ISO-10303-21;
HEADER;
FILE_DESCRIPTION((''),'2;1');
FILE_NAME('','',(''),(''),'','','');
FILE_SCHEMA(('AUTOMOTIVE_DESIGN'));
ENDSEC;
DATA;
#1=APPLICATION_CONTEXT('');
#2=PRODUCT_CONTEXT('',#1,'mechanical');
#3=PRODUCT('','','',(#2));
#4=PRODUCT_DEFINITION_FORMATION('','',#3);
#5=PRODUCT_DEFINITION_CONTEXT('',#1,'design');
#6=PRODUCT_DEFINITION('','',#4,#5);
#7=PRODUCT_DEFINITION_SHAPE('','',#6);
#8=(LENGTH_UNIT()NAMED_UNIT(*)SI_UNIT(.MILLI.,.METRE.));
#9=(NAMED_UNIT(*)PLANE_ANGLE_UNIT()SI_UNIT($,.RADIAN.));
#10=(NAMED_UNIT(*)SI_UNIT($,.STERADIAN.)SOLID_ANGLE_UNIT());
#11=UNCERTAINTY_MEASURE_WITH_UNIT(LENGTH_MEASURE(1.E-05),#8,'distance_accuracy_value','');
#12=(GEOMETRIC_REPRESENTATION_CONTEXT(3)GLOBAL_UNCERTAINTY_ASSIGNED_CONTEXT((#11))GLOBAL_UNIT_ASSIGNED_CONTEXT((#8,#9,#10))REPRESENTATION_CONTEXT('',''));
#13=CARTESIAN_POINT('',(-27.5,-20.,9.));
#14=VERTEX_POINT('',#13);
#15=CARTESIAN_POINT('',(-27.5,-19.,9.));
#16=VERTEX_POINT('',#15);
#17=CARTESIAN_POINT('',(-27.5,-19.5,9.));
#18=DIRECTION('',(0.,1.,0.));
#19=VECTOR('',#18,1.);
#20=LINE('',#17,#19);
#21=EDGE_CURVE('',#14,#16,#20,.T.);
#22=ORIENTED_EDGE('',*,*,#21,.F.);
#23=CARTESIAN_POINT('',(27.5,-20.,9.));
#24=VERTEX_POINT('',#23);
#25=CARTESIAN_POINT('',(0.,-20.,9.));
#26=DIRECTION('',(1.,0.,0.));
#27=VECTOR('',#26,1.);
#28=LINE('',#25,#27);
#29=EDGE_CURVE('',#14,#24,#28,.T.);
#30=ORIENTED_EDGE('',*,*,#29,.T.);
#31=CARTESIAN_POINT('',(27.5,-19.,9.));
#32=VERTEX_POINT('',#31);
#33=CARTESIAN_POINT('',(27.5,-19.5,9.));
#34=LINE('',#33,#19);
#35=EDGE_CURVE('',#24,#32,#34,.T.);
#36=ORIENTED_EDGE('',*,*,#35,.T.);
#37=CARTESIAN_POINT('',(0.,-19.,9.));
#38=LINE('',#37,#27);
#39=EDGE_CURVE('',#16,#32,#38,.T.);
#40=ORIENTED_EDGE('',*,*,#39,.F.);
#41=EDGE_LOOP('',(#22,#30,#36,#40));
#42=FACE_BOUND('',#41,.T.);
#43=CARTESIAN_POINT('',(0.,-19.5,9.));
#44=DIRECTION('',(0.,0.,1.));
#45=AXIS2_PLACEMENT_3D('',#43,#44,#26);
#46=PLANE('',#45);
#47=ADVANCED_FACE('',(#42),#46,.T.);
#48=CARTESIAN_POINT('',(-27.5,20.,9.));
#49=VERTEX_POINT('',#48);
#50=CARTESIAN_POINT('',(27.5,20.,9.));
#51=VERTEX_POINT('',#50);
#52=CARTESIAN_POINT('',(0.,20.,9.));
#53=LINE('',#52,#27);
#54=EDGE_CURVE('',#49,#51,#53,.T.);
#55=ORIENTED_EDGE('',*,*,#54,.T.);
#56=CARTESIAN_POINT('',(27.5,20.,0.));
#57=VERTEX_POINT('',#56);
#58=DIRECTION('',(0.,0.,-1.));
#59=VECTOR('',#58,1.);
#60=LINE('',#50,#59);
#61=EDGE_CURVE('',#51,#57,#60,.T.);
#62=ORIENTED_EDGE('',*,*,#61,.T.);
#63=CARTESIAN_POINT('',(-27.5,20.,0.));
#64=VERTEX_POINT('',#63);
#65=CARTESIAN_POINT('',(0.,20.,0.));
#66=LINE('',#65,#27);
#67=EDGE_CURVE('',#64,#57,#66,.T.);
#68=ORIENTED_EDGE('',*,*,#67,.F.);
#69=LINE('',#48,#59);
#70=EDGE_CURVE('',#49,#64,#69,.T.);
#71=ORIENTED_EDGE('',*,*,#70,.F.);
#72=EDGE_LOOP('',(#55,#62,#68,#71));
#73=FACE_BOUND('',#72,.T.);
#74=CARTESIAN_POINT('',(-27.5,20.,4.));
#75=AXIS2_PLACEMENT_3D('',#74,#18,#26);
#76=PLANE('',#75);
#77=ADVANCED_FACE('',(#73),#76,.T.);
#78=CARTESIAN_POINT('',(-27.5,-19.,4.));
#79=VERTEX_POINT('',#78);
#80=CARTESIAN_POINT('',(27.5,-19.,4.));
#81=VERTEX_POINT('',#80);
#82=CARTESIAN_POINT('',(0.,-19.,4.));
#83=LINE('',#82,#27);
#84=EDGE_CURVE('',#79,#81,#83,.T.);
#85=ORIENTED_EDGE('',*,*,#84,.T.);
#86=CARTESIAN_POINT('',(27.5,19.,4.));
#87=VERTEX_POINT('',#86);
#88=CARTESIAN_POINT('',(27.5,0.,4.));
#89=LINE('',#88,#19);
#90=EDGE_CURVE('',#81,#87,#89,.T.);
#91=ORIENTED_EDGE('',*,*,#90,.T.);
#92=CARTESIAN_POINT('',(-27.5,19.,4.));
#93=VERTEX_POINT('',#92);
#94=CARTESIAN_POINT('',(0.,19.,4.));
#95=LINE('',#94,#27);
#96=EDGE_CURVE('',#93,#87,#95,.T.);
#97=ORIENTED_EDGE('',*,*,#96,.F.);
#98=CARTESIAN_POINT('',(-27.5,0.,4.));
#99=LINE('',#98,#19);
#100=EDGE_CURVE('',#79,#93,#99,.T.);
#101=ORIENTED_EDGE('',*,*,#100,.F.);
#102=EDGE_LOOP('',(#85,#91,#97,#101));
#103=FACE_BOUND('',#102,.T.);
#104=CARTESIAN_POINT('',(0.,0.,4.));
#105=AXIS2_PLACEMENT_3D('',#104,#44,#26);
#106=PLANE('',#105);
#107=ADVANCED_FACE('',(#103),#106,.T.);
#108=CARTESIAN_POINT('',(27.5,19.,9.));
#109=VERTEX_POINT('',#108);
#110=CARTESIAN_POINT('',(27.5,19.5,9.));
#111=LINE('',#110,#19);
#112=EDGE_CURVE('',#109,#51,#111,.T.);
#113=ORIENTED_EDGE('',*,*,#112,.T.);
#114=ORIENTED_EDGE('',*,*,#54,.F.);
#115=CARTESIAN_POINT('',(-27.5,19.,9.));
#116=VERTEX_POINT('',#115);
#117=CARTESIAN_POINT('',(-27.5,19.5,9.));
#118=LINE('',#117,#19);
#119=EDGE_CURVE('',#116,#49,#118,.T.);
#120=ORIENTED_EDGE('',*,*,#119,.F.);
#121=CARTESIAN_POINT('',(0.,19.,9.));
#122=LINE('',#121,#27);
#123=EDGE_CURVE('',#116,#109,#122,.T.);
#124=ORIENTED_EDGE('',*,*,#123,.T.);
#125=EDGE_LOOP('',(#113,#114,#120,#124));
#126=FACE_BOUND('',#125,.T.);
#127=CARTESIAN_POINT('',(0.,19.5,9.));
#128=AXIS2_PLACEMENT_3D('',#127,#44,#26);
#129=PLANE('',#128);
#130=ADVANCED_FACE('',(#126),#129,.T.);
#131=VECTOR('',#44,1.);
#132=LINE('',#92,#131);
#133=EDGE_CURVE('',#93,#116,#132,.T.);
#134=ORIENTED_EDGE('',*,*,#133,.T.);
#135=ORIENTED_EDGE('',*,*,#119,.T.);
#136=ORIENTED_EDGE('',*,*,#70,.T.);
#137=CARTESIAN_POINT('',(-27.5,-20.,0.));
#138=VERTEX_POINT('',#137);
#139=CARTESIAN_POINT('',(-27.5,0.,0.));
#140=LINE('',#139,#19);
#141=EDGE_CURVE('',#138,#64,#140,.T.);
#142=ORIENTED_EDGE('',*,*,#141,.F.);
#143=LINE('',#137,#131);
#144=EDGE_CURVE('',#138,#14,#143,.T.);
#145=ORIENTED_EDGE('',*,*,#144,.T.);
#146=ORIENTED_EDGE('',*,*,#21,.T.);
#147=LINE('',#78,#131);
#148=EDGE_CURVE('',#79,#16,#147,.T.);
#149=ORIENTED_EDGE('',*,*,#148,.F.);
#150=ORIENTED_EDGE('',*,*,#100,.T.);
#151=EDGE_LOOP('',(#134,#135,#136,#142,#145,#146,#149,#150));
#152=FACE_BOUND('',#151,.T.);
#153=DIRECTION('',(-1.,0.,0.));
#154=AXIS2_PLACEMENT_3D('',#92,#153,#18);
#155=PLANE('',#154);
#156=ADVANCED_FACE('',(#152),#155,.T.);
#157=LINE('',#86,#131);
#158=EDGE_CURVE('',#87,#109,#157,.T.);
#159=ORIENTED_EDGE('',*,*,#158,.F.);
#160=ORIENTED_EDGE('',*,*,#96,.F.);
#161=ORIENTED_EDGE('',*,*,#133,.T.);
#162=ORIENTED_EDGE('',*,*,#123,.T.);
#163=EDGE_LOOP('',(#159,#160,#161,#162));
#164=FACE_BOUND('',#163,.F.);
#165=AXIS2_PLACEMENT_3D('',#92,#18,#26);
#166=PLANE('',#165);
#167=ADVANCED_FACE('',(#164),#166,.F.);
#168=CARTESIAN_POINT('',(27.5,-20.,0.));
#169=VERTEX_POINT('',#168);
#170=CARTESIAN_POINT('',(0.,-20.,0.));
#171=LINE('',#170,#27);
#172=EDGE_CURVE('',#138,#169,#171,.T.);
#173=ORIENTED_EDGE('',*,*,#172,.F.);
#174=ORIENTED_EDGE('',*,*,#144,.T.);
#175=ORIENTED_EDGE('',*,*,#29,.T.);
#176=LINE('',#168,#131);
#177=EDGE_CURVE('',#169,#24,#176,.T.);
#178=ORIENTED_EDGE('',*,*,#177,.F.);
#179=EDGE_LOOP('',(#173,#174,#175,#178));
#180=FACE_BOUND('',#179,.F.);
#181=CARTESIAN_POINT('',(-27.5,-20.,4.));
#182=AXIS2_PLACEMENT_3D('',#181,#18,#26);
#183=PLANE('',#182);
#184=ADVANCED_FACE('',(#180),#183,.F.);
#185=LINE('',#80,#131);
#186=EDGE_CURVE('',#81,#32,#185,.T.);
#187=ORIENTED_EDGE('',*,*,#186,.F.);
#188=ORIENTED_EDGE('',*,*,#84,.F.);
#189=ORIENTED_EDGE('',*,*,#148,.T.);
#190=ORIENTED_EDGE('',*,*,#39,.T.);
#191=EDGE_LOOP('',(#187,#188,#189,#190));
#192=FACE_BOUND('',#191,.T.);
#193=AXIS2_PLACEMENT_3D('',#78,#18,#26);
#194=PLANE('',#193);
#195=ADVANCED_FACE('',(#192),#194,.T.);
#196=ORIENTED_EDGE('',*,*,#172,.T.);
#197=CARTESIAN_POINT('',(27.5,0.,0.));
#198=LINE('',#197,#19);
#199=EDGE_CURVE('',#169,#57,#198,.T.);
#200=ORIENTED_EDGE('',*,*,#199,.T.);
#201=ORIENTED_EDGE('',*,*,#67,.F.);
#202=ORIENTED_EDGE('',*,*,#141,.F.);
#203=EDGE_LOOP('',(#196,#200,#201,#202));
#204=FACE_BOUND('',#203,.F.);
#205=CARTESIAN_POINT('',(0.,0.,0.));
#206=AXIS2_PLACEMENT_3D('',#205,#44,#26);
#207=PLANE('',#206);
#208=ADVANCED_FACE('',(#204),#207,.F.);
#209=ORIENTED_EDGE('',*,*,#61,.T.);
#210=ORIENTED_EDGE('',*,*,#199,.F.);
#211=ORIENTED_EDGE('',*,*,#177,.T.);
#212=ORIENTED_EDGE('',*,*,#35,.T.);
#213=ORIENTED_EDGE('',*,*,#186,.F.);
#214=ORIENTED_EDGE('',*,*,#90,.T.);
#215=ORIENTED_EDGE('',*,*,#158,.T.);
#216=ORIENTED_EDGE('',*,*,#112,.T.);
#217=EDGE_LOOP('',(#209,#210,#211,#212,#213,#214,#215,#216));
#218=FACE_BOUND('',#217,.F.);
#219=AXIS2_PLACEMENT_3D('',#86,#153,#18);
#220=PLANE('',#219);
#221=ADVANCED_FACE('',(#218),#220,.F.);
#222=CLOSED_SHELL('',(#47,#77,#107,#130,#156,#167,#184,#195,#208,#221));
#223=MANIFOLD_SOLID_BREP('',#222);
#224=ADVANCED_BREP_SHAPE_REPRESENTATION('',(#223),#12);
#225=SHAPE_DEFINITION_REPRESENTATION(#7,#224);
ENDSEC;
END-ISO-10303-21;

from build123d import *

# Parameters (mm, degrees)
F0_W     = 55
F0_H     = 40
F1_DEPTH = 4
F2_W     = 55
F2_H     = 1
F3_DEPTH = 5
F4_W     = 55
F4_H     = 1
F5_DEPTH = 5


# Not quite as in the source:
# - the program builds the solid bodies; features that only make, move or delete a surface that nothing else refers to are left out


with BuildPart() as f1:
    # F0 (on Top) → F1 (new body)
    with BuildSketch(Plane.XY):
        Rectangle(F0_W, F0_H)
    extrude(amount=F1_DEPTH)

    # F2 (on face) → F3 (join)
    with BuildSketch(Plane.XY.offset(4)):
        with Locations((0, -19.5)):
            Rectangle(F2_W, F2_H)
    extrude(amount=F3_DEPTH)

    # F4 (on face) → F5 (join)
    with BuildSketch(Plane.XY.offset(4)):
        with Locations((0, 19.5)):
            Rectangle(F4_W, F4_H)
    extrude(amount=F5_DEPTH)


solid = f1.part
